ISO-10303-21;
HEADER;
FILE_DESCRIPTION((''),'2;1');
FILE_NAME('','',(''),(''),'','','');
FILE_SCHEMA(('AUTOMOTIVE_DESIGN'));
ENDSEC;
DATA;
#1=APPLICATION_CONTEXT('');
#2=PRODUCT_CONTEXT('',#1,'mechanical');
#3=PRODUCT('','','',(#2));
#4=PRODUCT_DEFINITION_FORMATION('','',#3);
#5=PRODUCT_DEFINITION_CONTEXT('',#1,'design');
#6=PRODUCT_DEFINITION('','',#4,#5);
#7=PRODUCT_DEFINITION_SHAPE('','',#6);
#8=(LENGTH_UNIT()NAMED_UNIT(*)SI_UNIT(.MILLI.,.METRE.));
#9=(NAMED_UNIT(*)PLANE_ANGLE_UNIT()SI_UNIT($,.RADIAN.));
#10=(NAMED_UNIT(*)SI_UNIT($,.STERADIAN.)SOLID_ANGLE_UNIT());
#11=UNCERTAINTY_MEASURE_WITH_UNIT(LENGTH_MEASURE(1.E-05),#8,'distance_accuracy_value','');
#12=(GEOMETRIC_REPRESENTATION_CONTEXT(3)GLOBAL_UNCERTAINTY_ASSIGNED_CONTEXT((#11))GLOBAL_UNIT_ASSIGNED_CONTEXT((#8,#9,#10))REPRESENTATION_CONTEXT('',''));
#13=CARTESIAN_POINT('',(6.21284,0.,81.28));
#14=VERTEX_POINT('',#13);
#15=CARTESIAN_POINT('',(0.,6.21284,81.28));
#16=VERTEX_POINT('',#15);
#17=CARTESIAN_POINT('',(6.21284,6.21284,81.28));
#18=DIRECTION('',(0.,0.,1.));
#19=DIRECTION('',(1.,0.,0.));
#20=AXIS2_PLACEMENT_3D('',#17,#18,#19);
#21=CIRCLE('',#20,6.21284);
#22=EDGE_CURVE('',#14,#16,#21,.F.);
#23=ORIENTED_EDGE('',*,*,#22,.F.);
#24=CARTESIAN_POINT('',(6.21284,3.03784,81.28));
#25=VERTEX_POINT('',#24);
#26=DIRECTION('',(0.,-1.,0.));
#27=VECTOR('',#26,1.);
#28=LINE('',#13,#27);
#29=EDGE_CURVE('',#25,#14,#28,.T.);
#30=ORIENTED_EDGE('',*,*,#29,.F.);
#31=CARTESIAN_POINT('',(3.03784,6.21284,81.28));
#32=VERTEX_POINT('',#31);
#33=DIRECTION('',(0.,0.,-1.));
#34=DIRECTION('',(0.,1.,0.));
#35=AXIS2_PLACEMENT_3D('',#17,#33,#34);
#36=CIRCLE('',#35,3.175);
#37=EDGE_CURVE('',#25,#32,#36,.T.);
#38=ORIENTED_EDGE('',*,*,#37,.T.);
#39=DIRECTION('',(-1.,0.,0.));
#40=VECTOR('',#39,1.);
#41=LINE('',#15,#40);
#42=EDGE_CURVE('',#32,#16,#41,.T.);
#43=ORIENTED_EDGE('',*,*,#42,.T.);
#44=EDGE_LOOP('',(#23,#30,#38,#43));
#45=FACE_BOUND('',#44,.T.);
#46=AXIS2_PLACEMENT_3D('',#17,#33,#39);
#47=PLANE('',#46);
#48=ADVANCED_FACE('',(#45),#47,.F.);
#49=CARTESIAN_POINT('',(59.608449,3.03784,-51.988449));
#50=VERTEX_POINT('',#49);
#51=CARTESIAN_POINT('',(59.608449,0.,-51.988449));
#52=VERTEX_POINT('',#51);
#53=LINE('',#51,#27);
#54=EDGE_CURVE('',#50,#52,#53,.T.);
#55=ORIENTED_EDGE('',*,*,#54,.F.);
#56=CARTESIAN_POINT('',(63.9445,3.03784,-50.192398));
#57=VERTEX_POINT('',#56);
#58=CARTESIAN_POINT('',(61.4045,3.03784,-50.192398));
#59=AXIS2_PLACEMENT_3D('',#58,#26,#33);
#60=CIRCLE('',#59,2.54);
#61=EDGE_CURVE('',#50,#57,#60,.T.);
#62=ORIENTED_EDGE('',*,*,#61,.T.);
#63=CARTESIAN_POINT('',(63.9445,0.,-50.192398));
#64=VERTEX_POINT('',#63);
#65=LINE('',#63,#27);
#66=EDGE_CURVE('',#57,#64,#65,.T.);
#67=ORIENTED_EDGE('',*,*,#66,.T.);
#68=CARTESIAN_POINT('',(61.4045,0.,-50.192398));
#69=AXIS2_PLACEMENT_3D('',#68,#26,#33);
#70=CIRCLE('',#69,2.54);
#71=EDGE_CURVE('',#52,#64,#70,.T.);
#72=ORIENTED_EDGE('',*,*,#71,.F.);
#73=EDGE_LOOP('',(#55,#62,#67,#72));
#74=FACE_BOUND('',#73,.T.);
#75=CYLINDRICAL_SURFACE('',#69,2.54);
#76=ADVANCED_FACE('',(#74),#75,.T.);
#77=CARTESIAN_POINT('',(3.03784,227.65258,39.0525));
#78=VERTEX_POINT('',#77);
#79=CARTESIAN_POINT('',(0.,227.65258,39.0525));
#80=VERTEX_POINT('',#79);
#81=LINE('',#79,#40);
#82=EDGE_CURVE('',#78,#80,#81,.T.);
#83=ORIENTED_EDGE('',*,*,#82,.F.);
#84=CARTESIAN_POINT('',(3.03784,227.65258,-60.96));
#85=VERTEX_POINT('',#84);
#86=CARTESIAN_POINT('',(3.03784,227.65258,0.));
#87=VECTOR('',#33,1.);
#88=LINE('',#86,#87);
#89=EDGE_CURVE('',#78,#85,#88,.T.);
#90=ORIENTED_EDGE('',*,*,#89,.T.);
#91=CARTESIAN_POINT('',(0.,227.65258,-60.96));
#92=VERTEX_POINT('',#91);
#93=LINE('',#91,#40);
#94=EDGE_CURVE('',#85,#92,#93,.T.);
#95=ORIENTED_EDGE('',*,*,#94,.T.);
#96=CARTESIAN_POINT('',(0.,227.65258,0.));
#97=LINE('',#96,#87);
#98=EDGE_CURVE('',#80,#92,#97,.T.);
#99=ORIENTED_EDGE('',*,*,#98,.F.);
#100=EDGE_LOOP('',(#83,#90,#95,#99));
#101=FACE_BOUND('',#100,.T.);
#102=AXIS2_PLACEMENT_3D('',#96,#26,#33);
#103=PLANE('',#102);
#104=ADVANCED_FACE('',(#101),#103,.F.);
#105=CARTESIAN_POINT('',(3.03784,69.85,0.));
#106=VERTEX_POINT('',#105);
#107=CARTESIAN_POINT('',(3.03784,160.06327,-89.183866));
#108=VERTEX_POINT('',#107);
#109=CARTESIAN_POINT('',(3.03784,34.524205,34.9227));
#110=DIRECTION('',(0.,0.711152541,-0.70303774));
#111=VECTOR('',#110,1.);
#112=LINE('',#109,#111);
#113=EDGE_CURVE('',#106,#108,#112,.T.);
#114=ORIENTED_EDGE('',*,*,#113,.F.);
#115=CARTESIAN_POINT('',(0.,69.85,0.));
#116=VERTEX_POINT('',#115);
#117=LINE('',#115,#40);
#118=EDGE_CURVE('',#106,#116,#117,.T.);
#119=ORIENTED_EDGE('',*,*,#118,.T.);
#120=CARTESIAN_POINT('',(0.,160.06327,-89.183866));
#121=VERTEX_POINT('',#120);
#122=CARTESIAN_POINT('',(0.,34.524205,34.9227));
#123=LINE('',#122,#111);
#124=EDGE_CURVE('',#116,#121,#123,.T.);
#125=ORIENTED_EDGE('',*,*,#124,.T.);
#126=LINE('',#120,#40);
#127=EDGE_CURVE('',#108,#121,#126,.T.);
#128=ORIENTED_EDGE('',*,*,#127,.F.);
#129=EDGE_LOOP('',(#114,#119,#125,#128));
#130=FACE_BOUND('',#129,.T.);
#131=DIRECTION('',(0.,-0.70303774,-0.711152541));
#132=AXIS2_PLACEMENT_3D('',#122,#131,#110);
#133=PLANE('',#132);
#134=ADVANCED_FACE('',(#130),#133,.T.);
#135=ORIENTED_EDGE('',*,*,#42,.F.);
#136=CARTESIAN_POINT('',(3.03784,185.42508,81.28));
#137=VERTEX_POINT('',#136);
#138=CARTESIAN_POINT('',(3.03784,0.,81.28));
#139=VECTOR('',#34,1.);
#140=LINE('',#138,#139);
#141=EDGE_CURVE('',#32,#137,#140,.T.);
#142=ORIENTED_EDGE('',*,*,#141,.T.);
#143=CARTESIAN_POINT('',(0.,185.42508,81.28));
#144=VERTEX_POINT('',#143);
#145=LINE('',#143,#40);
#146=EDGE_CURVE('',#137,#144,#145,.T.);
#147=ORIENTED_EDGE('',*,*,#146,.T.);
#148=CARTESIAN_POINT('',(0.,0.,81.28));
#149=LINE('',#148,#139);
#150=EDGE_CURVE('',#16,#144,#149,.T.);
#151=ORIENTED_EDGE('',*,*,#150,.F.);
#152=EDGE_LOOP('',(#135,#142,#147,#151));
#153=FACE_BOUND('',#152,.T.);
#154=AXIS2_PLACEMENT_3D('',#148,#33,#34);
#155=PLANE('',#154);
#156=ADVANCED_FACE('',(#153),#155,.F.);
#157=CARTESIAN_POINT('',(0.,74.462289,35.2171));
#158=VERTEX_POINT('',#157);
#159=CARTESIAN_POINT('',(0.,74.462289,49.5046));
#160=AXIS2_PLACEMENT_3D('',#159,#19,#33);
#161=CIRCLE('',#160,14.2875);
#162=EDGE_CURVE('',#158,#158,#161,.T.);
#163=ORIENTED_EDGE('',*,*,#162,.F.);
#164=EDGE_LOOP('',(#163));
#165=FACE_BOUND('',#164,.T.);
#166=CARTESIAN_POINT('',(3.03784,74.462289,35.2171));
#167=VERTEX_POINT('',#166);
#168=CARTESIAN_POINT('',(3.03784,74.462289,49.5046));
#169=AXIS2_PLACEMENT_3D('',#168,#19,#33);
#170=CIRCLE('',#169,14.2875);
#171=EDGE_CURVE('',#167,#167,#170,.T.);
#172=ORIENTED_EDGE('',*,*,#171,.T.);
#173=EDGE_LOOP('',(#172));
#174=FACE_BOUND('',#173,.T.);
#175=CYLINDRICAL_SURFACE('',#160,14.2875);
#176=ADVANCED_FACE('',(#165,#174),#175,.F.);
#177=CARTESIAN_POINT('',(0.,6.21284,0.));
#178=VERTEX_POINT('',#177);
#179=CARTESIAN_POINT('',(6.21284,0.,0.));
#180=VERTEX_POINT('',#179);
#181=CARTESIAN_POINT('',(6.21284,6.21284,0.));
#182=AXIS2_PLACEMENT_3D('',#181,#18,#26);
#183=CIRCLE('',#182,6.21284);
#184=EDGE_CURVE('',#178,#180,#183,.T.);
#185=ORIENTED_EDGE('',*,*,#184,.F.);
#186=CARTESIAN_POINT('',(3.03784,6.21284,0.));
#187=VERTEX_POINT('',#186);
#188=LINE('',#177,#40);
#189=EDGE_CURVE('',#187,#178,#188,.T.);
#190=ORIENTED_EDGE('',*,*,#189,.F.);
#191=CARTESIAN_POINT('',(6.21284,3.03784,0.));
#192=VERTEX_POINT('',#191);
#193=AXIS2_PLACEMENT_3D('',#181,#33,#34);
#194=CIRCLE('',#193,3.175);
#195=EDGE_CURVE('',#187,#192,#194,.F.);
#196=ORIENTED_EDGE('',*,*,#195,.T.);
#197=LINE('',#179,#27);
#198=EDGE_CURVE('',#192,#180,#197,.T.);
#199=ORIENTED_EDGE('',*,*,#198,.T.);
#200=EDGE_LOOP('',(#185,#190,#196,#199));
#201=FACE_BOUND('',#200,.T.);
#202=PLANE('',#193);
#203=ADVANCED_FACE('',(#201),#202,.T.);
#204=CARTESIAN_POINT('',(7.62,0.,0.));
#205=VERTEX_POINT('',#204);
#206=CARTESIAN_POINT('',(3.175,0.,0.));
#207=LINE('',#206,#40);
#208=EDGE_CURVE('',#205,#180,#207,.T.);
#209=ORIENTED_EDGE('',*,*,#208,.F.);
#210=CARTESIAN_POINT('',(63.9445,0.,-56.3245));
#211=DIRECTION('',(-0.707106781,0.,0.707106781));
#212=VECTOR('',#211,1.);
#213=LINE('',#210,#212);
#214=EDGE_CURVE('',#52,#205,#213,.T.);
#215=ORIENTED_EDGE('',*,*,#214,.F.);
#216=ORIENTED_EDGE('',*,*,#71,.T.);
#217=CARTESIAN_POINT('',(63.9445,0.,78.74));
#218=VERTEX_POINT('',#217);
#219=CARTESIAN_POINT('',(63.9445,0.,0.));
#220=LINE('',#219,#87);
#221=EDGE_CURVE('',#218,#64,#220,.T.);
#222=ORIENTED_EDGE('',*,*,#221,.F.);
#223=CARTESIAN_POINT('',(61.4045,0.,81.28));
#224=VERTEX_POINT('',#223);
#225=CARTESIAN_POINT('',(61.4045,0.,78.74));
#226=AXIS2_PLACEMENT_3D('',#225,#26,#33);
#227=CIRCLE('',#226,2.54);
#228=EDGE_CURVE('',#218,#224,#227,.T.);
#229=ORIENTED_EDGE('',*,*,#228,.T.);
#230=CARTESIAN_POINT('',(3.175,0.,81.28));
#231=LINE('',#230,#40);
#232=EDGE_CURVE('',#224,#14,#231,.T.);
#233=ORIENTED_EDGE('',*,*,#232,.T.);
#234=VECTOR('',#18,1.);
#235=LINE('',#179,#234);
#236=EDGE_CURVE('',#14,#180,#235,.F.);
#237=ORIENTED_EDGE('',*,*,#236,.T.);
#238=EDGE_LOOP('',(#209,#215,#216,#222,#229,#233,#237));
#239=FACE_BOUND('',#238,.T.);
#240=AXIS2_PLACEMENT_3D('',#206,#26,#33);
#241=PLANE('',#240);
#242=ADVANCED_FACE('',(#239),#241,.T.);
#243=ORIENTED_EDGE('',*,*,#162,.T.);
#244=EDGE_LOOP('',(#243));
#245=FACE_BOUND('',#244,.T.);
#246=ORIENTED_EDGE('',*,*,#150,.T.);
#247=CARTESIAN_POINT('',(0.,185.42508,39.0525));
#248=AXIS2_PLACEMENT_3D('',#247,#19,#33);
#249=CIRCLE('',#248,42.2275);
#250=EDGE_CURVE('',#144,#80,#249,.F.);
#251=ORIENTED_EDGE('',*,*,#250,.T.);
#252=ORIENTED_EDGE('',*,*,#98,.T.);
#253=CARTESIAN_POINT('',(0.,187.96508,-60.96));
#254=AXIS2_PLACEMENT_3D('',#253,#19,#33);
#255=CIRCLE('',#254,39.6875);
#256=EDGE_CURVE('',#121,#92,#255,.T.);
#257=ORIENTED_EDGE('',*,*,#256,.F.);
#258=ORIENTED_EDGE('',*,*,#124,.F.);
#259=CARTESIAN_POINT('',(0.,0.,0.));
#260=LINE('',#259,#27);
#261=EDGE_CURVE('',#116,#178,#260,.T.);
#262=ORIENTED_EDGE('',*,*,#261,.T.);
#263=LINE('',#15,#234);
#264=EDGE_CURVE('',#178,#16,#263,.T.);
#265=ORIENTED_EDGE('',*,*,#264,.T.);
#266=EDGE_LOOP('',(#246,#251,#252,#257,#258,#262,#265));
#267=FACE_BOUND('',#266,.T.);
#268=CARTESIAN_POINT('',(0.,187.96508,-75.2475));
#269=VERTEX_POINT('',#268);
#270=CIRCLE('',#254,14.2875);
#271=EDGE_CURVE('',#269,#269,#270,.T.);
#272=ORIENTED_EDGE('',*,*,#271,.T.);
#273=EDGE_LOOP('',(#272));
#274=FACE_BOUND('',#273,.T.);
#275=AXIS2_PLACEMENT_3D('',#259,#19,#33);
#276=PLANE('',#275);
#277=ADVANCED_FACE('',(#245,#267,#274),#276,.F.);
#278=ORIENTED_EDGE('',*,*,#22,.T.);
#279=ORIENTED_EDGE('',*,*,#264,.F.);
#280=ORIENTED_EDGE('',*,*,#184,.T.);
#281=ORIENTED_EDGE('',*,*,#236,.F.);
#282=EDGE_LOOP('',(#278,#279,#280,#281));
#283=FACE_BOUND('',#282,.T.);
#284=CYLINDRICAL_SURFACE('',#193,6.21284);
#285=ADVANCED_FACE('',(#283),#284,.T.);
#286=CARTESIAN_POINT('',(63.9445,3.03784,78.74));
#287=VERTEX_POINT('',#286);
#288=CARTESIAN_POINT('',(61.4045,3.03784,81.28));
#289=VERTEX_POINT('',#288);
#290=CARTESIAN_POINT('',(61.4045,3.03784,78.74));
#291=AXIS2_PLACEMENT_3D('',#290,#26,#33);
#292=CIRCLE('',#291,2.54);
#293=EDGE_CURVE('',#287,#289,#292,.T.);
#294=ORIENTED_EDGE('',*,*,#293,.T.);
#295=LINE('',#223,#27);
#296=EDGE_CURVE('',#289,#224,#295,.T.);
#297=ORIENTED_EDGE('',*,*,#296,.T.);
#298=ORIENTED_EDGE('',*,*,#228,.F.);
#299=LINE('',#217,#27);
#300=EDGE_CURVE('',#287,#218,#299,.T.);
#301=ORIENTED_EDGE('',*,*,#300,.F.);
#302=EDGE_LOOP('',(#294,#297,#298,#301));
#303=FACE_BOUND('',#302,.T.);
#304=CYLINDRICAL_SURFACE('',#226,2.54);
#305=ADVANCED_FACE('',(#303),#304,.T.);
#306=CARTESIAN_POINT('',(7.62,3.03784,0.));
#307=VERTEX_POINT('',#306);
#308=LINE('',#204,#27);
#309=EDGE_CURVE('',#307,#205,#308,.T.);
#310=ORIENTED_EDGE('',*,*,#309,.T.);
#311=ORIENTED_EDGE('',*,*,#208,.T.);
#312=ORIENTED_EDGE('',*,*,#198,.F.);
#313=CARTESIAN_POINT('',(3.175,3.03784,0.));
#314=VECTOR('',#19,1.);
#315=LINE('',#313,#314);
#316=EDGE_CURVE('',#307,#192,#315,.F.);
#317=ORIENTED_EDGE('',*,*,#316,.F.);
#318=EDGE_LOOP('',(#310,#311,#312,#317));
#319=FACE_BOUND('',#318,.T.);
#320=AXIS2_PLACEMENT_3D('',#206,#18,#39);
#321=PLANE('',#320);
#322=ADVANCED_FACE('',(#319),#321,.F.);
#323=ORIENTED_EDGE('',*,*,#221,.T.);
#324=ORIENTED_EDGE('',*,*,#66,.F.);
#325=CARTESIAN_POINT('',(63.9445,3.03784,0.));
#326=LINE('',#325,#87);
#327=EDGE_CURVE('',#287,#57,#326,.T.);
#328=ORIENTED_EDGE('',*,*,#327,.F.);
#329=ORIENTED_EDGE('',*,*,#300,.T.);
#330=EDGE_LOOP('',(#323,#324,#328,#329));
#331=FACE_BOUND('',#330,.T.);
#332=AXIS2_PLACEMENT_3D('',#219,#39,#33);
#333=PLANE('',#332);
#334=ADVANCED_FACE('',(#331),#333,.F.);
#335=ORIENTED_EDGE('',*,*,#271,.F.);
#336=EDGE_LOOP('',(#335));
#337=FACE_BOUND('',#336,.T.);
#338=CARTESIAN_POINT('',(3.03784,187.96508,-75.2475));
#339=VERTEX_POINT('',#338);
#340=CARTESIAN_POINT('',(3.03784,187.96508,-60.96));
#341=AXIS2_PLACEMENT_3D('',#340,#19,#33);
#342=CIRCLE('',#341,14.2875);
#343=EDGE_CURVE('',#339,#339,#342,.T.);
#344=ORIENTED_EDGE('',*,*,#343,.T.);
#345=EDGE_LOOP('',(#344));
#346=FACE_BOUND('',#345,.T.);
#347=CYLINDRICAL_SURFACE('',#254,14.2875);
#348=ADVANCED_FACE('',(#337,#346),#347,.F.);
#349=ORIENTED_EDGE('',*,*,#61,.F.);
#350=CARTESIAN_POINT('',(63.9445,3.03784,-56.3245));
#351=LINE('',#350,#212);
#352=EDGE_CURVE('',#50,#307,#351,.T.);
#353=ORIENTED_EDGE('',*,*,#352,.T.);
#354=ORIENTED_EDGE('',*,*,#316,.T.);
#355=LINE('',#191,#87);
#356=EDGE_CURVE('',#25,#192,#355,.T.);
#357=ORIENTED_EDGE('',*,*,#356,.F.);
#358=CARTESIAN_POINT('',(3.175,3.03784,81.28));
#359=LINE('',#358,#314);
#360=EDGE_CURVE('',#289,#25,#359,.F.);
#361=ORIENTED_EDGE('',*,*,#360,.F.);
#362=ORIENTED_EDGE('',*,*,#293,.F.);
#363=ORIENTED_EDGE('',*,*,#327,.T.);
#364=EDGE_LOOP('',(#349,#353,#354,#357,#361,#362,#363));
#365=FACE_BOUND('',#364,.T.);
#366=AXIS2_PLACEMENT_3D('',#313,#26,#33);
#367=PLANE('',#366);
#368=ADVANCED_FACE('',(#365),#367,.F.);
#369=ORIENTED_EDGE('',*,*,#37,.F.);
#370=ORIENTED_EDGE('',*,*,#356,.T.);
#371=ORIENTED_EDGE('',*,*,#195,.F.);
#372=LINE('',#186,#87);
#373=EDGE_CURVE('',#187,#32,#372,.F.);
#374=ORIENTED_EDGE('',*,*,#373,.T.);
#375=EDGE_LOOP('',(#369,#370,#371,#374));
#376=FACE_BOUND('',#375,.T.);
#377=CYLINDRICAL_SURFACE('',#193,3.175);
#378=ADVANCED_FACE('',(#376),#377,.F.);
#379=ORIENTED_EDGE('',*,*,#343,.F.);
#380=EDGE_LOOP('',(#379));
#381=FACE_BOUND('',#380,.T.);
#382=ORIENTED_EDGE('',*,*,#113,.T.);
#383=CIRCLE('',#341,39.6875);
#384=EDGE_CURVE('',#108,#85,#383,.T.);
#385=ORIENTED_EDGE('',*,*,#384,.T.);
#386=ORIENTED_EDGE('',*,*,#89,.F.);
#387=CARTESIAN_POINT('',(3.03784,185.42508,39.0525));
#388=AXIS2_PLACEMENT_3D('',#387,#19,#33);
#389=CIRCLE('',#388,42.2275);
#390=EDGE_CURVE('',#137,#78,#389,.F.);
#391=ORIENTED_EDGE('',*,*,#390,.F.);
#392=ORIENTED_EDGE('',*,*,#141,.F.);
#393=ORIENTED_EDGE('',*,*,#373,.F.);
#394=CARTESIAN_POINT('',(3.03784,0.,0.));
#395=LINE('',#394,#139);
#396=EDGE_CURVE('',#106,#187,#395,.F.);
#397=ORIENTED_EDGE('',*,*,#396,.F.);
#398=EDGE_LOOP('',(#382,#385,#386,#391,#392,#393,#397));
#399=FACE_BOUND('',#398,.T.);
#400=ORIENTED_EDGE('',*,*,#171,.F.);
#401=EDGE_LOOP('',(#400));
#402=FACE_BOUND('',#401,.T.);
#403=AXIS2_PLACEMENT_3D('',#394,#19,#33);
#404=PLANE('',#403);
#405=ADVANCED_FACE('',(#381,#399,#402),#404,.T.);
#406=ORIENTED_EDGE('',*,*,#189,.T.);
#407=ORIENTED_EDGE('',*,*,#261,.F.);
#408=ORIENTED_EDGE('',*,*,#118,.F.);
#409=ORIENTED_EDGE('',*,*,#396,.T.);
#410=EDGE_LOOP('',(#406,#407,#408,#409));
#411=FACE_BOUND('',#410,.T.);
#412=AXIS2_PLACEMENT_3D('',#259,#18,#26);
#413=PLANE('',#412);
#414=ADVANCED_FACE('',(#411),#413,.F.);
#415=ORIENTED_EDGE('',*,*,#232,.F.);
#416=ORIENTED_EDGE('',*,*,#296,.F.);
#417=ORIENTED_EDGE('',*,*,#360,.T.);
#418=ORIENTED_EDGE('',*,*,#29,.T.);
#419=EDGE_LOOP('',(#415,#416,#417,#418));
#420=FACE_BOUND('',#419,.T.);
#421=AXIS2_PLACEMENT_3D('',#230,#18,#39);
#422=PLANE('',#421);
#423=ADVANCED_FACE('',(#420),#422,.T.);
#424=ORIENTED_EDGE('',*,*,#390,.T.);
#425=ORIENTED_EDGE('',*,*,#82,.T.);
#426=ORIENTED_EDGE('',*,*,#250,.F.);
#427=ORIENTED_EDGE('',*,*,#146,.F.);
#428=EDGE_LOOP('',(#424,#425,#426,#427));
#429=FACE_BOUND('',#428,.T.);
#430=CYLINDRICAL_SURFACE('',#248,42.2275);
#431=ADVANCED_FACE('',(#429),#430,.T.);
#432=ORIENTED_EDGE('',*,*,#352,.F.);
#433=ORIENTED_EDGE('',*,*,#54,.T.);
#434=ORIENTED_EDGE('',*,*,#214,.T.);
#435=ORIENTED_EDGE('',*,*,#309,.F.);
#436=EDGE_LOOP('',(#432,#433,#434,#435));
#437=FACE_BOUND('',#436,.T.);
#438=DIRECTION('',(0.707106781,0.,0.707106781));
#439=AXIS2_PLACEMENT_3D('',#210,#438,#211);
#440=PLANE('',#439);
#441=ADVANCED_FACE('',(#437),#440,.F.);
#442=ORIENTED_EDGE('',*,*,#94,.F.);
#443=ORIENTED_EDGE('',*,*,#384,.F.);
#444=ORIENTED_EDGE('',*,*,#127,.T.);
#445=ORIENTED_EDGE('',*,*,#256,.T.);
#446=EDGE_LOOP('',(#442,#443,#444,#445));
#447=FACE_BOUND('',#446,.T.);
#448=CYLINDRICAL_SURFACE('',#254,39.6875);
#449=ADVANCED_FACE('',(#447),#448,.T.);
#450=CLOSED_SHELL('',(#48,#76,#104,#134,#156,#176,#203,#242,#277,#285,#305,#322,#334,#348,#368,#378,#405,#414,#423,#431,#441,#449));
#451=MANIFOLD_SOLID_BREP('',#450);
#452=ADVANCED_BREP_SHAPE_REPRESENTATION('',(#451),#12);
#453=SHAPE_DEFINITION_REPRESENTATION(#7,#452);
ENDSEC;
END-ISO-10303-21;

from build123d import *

# Parameters (mm, degrees)
SKETCH2_R              = 14.2875
SKETCH2_W              = 81.28
SKETCH2_H              = 3.175
BOSS_EXTRUDE1_DEPTH    = 3.175
SKETCH9_R              = 14.2875
CUT_EXTRUDE2_DEPTH     = 3.175
BOSS_EXTRUDE2_START    = 3.175
SKETCH2_3_W            = 81.28
SKETCH2_3_H            = 3.175
BOSS_EXTRUDE2_DEPTH    = 60.7695
BOSS_EXTRUDE3_DEPTH    = 3.175
FILLET1_R              = 2.54
FILLET2_R              = 42.2275
CONVERT_SOLID2_START   = -100.6475
CONVERT_SOLID2_DEPTH   = 181.9275
CONVERT_SOLID2_2_DEPTH = 81.28


# Read off the part's stored shape, not the designer's step: Convert-Solid2
with BuildPart() as part:
    # Sketch2 → Boss-Extrude1 (new body)
    # profile 1 of 2: a face of its own
    with BuildSketch(Plane(origin=(0, 0, 0), x_dir=(0, 0, -1), z_dir=(1, 0, 0))):
        with BuildLine():
            Line((0, 3.175), (0, 69.85))
            Line((0, 69.85), (89.183866464, 160.063269699))
            ThreePointArc((89.183866464, 160.063269699), (97.582743975, 203.257963311), (60.96, 227.65258))
            Line((60.96, 227.65258), (-81.28, 227.65258))
            Line((-81.28, 227.65258), (-81.28, 69.85))
            Line((-81.28, 69.85), (-81.28, 3.175))
            Line((-81.28, 3.175), (0, 3.175))
        make_face()
        with Locations((60.96, 187.96508)):
            Circle(SKETCH2_R, mode=Mode.SUBTRACT)
    # profile 2 of 2: a face of its own
    with BuildSketch(Plane(origin=(0, 0, 0), x_dir=(0, 0, -1), z_dir=(1, 0, 0))):
        with Locations((-40.64, 1.5875)):
            Rectangle(SKETCH2_W, SKETCH2_H)
    extrude(amount=BOSS_EXTRUDE1_DEPTH)

    # Sketch9 → Cut-Extrude2 (cut)
    with BuildSketch(Plane(origin=(0, 0, 0), x_dir=(0, 0, -1), z_dir=(1, 0, 0))):
        with Locations((-49.5046, 74.46228868)):
            Circle(SKETCH9_R)
    extrude(amount=CUT_EXTRUDE2_DEPTH, mode=Mode.SUBTRACT)

    # Sketch2<3> → Boss-Extrude2 (add)
    with BuildSketch(Plane(origin=(0, 0, 0), x_dir=(0, 0, -1), z_dir=(1, 0, 0)).offset(BOSS_EXTRUDE2_START)):
        with Locations((-40.64, 1.5875)):
            Rectangle(SKETCH2_3_W, SKETCH2_3_H)
    extrude(amount=BOSS_EXTRUDE2_DEPTH)

    # Sketch3 → Boss-Extrude3 (add)
    with BuildSketch(Plane(origin=(0, 3.175, 0), x_dir=(1, 0, 0), z_dir=(0, 1, 0))):
        Polygon((63.9445, 0), (63.9445, 56.3245), (7.62, 0), align=None)
    extrude(amount=-BOSS_EXTRUDE3_DEPTH)

    # Fillet1
    fillet1_edges = [part.edges().sort_by_distance(p)[0] for p in [
        (63.9445, 1.5875, 81.28),
        (63.9445, 1.5875, -56.3245),
    ]]
    fillet(fillet1_edges, radius=FILLET1_R)

    # Fillet2
    fillet2_edges = [part.edges().sort_by_distance(p)[0] for p in [
        (1.5875, 227.65258, 81.28),
    ]]
    fillet(fillet2_edges, radius=FILLET2_R)

    # Convert-Solid2 outline → Convert-Solid2 (cut)
    with BuildSketch(Plane.XY.offset(CONVERT_SOLID2_START)):
        with BuildLine():
            Line((0, 0), (6.21284, 0))
            ThreePointArc((6.21284, 0), (1.819698706, 1.819698706), (0, 6.21284))
            Line((0, 6.21284), (0, 0))
        make_face()
        with BuildLine():
            Line((6.21284, 3.03784), (63.9445, 3.03784))
            Line((63.9445, 3.03784), (63.9445, 3.175))
            Line((63.9445, 3.175), (5.289718593, 3.175))
            ThreePointArc((5.289718593, 3.175), (5.746212204, 3.072317193), (6.21284, 3.03784))
        make_face()
        with BuildLine():
            Line((3.175, 227.65258), (3.03784, 227.65258))
            Line((3.03784, 227.65258), (3.03784, 6.21284))
            ThreePointArc((3.03784, 6.21284), (3.072317193, 5.746212204), (3.175, 5.289718593))
            Line((3.175, 5.289718593), (3.175, 227.65258))
        make_face()
    extrude(amount=CONVERT_SOLID2_DEPTH, mode=Mode.SUBTRACT)

    # Convert-Solid2 2 outline → Convert-Solid2 2 (add)
    with BuildSketch(Plane.XY):
        with BuildLine():
            Line((3.175, 3.175), (5.289718593, 3.175))
            ThreePointArc((5.289718593, 3.175), (3.96777597, 3.96777597), (3.175, 5.289718593))
            Line((3.175, 5.289718593), (3.175, 3.175))
        make_face()
    extrude(amount=CONVERT_SOLID2_2_DEPTH)


solid = part.part
